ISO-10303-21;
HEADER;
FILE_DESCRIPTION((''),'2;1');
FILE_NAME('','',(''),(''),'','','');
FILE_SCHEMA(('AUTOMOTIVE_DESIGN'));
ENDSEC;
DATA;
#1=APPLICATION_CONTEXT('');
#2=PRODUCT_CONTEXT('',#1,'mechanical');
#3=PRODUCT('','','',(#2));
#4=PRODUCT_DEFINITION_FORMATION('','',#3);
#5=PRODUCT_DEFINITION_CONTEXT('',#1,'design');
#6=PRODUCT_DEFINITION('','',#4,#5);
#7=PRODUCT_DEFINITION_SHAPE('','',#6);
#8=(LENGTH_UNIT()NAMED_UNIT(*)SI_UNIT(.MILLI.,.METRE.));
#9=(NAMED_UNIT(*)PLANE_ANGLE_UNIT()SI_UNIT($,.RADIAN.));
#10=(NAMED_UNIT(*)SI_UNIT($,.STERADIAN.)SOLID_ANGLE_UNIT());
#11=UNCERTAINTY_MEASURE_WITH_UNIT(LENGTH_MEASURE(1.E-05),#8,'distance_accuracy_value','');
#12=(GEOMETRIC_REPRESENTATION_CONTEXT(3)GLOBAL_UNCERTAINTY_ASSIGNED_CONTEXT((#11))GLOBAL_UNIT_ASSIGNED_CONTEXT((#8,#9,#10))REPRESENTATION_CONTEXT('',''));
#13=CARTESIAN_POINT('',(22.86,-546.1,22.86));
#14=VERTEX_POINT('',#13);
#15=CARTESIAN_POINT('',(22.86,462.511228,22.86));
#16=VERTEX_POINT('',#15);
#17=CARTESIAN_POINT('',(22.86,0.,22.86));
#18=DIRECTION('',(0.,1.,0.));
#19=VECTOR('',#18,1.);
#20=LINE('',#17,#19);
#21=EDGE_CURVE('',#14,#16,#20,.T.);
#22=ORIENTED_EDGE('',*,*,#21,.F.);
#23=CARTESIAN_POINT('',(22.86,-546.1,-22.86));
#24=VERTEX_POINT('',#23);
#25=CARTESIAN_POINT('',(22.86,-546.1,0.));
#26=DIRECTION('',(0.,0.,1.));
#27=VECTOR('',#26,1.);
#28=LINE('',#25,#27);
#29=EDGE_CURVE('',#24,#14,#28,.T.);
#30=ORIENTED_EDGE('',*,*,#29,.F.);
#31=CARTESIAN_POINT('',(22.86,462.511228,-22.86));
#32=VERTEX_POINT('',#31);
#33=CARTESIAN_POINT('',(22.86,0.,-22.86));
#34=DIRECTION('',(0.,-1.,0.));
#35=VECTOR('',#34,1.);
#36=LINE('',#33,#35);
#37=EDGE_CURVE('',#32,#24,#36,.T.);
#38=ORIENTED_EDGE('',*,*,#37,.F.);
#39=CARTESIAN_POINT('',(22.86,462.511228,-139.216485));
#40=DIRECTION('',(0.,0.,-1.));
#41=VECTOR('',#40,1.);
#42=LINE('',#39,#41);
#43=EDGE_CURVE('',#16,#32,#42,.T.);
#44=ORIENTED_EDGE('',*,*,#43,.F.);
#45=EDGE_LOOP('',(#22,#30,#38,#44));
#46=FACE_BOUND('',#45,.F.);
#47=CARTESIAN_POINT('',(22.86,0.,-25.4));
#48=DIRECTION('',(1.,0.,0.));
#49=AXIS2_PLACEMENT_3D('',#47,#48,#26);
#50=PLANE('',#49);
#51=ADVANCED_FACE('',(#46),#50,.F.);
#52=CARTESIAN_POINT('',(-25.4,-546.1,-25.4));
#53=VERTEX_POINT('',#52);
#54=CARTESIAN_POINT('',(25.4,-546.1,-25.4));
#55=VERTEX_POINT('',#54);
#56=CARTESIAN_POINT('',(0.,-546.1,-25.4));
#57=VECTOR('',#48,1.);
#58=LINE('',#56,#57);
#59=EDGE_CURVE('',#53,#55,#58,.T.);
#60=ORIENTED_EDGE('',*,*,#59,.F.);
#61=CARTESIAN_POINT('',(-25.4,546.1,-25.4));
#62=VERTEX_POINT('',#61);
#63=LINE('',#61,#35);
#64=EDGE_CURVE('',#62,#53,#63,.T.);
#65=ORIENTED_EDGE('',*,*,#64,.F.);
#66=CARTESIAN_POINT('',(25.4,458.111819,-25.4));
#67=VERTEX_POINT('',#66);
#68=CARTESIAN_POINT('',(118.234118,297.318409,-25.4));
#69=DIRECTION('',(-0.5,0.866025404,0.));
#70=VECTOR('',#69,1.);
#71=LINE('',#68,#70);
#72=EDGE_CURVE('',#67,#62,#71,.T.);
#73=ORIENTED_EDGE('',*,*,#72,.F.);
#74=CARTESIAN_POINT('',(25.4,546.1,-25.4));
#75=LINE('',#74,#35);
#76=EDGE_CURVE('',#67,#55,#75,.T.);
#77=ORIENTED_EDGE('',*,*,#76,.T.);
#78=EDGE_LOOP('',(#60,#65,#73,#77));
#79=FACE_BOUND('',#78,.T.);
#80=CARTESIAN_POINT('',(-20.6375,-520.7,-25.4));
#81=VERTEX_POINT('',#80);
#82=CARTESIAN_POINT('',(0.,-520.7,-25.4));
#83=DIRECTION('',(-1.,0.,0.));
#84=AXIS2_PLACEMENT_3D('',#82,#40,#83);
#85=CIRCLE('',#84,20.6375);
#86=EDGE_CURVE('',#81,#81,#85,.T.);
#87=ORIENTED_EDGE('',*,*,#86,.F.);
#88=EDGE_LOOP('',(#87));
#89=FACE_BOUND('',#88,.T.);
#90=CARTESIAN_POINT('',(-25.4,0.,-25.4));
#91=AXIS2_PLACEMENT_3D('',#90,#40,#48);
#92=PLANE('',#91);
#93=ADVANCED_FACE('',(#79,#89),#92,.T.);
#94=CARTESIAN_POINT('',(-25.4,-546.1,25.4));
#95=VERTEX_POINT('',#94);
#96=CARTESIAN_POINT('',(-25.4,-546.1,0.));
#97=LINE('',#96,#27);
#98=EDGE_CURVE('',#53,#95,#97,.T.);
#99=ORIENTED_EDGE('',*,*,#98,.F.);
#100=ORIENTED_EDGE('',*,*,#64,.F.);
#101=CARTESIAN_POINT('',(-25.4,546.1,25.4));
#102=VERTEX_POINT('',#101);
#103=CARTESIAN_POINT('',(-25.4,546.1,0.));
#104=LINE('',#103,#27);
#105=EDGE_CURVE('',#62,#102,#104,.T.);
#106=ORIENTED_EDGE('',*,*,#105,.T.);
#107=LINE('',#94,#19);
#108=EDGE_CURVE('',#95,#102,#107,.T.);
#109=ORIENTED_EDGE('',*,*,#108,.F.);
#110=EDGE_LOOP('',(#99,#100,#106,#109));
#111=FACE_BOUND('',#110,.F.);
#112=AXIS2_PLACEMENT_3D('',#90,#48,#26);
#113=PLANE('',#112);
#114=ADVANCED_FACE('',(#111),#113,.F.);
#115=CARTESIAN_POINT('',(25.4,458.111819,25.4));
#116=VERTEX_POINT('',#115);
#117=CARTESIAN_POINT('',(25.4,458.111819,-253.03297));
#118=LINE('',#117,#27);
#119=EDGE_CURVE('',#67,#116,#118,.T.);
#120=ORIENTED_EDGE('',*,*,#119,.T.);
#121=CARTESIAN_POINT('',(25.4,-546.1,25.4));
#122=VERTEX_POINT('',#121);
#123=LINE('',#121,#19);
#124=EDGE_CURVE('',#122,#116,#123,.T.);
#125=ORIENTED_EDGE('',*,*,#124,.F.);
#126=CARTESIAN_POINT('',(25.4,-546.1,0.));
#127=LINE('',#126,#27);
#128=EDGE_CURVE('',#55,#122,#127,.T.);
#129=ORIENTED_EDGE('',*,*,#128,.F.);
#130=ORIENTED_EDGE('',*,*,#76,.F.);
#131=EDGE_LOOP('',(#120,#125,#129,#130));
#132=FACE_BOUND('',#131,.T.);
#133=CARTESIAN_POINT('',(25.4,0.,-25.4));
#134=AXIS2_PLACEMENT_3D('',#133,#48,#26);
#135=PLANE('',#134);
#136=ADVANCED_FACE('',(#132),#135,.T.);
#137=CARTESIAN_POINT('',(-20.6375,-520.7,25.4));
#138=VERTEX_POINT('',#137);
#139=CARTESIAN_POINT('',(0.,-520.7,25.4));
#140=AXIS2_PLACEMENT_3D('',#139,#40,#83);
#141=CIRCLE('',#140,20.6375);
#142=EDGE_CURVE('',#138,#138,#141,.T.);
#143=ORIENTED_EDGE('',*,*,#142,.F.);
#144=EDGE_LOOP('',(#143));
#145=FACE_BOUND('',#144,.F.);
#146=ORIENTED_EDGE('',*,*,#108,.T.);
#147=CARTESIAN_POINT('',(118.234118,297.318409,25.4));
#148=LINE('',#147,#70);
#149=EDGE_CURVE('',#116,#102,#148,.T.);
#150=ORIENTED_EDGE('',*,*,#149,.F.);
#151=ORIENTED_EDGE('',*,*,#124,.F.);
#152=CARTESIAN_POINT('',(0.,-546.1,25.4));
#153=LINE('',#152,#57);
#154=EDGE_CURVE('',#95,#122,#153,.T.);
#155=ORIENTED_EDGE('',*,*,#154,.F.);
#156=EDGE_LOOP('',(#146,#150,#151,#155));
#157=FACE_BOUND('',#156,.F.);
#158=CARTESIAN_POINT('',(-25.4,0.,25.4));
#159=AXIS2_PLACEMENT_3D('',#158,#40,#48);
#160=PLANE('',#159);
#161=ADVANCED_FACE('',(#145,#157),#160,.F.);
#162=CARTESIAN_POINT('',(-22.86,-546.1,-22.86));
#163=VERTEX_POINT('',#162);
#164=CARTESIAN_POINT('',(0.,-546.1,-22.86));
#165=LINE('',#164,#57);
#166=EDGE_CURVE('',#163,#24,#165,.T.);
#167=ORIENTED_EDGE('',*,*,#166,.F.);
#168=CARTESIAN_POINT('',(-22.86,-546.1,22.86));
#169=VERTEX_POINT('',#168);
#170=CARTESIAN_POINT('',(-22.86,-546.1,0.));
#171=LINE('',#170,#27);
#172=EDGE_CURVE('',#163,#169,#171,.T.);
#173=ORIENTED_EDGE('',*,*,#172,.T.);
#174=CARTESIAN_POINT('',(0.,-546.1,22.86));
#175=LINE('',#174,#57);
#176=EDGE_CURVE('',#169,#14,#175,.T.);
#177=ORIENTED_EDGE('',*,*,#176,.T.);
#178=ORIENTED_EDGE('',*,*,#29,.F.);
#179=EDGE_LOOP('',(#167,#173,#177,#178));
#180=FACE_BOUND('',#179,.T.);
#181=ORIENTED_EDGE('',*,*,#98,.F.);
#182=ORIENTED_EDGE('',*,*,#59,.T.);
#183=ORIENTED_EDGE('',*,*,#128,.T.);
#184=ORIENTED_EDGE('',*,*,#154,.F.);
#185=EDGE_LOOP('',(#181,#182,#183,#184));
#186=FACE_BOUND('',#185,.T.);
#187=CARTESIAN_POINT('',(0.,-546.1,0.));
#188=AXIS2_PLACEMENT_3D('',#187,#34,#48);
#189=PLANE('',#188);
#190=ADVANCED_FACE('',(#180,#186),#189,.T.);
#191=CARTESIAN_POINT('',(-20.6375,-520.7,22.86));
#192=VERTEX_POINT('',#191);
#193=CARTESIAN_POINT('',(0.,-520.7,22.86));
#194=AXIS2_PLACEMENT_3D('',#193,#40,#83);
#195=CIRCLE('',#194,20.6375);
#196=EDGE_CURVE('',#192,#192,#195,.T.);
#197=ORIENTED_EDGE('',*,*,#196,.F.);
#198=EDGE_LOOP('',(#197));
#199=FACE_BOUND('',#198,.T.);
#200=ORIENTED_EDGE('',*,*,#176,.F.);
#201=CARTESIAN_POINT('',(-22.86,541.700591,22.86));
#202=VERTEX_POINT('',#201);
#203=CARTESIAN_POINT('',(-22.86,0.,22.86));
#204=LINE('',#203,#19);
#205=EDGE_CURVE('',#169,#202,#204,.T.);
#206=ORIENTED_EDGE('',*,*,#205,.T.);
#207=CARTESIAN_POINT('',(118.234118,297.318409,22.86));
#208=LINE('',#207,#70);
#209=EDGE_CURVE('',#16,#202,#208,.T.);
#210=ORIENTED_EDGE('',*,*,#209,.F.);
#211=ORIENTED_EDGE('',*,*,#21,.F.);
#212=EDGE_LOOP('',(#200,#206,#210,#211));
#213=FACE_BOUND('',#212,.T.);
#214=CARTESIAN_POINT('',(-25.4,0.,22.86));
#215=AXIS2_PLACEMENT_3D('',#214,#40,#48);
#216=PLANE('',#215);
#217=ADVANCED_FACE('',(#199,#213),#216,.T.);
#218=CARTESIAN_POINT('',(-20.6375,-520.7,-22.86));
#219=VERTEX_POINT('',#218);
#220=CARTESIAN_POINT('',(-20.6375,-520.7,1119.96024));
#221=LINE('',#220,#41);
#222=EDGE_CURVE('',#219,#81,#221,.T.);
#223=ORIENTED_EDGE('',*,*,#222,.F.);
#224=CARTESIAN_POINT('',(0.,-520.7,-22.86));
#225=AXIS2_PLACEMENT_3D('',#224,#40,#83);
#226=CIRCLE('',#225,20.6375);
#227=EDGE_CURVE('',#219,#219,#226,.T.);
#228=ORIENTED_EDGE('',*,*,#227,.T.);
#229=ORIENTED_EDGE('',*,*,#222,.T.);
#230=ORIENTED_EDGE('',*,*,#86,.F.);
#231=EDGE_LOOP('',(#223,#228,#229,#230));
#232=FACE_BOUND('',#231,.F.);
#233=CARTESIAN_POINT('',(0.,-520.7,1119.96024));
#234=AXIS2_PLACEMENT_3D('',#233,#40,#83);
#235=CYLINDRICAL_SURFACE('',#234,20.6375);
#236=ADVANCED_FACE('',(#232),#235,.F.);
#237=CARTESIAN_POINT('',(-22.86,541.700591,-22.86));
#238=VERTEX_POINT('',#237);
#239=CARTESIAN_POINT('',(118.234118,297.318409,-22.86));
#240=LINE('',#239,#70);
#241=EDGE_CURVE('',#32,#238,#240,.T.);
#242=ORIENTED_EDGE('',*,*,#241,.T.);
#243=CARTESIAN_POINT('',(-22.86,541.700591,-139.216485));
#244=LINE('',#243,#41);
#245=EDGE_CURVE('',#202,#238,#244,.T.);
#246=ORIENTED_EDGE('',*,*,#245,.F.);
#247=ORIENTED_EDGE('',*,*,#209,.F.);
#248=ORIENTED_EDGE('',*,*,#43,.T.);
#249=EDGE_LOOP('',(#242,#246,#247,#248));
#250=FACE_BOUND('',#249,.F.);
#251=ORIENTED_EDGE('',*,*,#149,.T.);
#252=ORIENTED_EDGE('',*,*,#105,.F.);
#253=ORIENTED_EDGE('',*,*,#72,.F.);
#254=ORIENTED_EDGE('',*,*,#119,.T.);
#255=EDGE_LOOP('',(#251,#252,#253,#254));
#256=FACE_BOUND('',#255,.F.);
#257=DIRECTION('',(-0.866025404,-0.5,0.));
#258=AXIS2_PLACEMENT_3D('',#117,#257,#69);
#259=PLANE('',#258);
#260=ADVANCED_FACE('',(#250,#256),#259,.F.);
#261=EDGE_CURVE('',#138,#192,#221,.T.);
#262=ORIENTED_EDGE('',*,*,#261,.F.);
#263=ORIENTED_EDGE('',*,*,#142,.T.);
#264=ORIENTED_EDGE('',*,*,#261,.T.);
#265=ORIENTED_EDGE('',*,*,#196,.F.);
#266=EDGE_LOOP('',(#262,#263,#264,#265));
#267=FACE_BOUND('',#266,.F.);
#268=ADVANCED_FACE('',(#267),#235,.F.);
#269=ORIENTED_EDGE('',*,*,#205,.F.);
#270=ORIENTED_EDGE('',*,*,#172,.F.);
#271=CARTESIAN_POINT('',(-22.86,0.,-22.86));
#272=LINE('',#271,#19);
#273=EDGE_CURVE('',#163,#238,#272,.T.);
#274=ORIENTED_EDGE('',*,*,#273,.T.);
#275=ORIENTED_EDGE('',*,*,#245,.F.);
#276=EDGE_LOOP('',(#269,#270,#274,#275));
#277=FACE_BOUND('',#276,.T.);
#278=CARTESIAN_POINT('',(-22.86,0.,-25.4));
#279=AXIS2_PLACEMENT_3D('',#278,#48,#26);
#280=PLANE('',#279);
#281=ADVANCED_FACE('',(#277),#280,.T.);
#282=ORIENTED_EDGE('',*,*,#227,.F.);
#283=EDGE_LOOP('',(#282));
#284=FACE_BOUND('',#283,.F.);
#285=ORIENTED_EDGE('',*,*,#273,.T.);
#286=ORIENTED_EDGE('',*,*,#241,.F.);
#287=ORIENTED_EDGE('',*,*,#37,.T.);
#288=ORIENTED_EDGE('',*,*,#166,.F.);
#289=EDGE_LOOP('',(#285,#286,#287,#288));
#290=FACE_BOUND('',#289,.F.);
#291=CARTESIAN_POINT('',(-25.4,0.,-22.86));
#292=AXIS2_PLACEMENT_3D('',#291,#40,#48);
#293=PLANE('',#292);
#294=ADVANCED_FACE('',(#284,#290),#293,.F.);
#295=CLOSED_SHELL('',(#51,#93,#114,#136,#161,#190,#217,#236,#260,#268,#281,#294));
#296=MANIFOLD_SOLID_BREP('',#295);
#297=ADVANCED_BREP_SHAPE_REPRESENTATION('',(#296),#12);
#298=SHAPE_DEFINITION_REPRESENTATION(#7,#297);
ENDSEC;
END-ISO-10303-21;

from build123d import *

# Parameters (mm, degrees)
F0_W        = 50.8
F0_H        = 50.8
F1_DEPTH    = 546.1
F2_T        = -2.54
F3_T1_DEPTH = 506.0659394114
F5_D        = 41.275


# Not quite as in the source:
# - a fillet or chamfer that OpenCascade refuses, or shapes differently, is made with other operations: its cross-section is extruded or revolved along the edge and cut away or added


with BuildPart() as f1:
    # F0 (on Front) → F1 (new body, symmetric)
    with BuildSketch(Plane.XZ):
        Rectangle(F0_W, F0_H)
    extrude(amount=F1_DEPTH, both=True)

    # F2
    f2_openings = [f1.faces().sort_by_distance(p)[0] for p in [
        (0, -546.1, 0),
        (0, 546.1, 0),
    ]]
    offset(amount=F2_T, openings=f2_openings)

    # F3: chamfer of 50.8 x 87.9881810245 on 1 edges, made by hand

    # F3_s2 → F3_t1 (cut)
    with BuildSketch(Plane.XY.offset(-253.0329697057)):
        Polygon((25.4, 458.1118189755), (-25.4, 546.1), (25.4, 546.1), align=None)
    extrude(amount=F3_T1_DEPTH, mode=Mode.SUBTRACT)

    # F5 (through all)
    with Locations(Plane.XY.offset(25.4)):
        with Locations((0, -520.7)):
            Hole(F5_D / 2)


solid = f1.part
